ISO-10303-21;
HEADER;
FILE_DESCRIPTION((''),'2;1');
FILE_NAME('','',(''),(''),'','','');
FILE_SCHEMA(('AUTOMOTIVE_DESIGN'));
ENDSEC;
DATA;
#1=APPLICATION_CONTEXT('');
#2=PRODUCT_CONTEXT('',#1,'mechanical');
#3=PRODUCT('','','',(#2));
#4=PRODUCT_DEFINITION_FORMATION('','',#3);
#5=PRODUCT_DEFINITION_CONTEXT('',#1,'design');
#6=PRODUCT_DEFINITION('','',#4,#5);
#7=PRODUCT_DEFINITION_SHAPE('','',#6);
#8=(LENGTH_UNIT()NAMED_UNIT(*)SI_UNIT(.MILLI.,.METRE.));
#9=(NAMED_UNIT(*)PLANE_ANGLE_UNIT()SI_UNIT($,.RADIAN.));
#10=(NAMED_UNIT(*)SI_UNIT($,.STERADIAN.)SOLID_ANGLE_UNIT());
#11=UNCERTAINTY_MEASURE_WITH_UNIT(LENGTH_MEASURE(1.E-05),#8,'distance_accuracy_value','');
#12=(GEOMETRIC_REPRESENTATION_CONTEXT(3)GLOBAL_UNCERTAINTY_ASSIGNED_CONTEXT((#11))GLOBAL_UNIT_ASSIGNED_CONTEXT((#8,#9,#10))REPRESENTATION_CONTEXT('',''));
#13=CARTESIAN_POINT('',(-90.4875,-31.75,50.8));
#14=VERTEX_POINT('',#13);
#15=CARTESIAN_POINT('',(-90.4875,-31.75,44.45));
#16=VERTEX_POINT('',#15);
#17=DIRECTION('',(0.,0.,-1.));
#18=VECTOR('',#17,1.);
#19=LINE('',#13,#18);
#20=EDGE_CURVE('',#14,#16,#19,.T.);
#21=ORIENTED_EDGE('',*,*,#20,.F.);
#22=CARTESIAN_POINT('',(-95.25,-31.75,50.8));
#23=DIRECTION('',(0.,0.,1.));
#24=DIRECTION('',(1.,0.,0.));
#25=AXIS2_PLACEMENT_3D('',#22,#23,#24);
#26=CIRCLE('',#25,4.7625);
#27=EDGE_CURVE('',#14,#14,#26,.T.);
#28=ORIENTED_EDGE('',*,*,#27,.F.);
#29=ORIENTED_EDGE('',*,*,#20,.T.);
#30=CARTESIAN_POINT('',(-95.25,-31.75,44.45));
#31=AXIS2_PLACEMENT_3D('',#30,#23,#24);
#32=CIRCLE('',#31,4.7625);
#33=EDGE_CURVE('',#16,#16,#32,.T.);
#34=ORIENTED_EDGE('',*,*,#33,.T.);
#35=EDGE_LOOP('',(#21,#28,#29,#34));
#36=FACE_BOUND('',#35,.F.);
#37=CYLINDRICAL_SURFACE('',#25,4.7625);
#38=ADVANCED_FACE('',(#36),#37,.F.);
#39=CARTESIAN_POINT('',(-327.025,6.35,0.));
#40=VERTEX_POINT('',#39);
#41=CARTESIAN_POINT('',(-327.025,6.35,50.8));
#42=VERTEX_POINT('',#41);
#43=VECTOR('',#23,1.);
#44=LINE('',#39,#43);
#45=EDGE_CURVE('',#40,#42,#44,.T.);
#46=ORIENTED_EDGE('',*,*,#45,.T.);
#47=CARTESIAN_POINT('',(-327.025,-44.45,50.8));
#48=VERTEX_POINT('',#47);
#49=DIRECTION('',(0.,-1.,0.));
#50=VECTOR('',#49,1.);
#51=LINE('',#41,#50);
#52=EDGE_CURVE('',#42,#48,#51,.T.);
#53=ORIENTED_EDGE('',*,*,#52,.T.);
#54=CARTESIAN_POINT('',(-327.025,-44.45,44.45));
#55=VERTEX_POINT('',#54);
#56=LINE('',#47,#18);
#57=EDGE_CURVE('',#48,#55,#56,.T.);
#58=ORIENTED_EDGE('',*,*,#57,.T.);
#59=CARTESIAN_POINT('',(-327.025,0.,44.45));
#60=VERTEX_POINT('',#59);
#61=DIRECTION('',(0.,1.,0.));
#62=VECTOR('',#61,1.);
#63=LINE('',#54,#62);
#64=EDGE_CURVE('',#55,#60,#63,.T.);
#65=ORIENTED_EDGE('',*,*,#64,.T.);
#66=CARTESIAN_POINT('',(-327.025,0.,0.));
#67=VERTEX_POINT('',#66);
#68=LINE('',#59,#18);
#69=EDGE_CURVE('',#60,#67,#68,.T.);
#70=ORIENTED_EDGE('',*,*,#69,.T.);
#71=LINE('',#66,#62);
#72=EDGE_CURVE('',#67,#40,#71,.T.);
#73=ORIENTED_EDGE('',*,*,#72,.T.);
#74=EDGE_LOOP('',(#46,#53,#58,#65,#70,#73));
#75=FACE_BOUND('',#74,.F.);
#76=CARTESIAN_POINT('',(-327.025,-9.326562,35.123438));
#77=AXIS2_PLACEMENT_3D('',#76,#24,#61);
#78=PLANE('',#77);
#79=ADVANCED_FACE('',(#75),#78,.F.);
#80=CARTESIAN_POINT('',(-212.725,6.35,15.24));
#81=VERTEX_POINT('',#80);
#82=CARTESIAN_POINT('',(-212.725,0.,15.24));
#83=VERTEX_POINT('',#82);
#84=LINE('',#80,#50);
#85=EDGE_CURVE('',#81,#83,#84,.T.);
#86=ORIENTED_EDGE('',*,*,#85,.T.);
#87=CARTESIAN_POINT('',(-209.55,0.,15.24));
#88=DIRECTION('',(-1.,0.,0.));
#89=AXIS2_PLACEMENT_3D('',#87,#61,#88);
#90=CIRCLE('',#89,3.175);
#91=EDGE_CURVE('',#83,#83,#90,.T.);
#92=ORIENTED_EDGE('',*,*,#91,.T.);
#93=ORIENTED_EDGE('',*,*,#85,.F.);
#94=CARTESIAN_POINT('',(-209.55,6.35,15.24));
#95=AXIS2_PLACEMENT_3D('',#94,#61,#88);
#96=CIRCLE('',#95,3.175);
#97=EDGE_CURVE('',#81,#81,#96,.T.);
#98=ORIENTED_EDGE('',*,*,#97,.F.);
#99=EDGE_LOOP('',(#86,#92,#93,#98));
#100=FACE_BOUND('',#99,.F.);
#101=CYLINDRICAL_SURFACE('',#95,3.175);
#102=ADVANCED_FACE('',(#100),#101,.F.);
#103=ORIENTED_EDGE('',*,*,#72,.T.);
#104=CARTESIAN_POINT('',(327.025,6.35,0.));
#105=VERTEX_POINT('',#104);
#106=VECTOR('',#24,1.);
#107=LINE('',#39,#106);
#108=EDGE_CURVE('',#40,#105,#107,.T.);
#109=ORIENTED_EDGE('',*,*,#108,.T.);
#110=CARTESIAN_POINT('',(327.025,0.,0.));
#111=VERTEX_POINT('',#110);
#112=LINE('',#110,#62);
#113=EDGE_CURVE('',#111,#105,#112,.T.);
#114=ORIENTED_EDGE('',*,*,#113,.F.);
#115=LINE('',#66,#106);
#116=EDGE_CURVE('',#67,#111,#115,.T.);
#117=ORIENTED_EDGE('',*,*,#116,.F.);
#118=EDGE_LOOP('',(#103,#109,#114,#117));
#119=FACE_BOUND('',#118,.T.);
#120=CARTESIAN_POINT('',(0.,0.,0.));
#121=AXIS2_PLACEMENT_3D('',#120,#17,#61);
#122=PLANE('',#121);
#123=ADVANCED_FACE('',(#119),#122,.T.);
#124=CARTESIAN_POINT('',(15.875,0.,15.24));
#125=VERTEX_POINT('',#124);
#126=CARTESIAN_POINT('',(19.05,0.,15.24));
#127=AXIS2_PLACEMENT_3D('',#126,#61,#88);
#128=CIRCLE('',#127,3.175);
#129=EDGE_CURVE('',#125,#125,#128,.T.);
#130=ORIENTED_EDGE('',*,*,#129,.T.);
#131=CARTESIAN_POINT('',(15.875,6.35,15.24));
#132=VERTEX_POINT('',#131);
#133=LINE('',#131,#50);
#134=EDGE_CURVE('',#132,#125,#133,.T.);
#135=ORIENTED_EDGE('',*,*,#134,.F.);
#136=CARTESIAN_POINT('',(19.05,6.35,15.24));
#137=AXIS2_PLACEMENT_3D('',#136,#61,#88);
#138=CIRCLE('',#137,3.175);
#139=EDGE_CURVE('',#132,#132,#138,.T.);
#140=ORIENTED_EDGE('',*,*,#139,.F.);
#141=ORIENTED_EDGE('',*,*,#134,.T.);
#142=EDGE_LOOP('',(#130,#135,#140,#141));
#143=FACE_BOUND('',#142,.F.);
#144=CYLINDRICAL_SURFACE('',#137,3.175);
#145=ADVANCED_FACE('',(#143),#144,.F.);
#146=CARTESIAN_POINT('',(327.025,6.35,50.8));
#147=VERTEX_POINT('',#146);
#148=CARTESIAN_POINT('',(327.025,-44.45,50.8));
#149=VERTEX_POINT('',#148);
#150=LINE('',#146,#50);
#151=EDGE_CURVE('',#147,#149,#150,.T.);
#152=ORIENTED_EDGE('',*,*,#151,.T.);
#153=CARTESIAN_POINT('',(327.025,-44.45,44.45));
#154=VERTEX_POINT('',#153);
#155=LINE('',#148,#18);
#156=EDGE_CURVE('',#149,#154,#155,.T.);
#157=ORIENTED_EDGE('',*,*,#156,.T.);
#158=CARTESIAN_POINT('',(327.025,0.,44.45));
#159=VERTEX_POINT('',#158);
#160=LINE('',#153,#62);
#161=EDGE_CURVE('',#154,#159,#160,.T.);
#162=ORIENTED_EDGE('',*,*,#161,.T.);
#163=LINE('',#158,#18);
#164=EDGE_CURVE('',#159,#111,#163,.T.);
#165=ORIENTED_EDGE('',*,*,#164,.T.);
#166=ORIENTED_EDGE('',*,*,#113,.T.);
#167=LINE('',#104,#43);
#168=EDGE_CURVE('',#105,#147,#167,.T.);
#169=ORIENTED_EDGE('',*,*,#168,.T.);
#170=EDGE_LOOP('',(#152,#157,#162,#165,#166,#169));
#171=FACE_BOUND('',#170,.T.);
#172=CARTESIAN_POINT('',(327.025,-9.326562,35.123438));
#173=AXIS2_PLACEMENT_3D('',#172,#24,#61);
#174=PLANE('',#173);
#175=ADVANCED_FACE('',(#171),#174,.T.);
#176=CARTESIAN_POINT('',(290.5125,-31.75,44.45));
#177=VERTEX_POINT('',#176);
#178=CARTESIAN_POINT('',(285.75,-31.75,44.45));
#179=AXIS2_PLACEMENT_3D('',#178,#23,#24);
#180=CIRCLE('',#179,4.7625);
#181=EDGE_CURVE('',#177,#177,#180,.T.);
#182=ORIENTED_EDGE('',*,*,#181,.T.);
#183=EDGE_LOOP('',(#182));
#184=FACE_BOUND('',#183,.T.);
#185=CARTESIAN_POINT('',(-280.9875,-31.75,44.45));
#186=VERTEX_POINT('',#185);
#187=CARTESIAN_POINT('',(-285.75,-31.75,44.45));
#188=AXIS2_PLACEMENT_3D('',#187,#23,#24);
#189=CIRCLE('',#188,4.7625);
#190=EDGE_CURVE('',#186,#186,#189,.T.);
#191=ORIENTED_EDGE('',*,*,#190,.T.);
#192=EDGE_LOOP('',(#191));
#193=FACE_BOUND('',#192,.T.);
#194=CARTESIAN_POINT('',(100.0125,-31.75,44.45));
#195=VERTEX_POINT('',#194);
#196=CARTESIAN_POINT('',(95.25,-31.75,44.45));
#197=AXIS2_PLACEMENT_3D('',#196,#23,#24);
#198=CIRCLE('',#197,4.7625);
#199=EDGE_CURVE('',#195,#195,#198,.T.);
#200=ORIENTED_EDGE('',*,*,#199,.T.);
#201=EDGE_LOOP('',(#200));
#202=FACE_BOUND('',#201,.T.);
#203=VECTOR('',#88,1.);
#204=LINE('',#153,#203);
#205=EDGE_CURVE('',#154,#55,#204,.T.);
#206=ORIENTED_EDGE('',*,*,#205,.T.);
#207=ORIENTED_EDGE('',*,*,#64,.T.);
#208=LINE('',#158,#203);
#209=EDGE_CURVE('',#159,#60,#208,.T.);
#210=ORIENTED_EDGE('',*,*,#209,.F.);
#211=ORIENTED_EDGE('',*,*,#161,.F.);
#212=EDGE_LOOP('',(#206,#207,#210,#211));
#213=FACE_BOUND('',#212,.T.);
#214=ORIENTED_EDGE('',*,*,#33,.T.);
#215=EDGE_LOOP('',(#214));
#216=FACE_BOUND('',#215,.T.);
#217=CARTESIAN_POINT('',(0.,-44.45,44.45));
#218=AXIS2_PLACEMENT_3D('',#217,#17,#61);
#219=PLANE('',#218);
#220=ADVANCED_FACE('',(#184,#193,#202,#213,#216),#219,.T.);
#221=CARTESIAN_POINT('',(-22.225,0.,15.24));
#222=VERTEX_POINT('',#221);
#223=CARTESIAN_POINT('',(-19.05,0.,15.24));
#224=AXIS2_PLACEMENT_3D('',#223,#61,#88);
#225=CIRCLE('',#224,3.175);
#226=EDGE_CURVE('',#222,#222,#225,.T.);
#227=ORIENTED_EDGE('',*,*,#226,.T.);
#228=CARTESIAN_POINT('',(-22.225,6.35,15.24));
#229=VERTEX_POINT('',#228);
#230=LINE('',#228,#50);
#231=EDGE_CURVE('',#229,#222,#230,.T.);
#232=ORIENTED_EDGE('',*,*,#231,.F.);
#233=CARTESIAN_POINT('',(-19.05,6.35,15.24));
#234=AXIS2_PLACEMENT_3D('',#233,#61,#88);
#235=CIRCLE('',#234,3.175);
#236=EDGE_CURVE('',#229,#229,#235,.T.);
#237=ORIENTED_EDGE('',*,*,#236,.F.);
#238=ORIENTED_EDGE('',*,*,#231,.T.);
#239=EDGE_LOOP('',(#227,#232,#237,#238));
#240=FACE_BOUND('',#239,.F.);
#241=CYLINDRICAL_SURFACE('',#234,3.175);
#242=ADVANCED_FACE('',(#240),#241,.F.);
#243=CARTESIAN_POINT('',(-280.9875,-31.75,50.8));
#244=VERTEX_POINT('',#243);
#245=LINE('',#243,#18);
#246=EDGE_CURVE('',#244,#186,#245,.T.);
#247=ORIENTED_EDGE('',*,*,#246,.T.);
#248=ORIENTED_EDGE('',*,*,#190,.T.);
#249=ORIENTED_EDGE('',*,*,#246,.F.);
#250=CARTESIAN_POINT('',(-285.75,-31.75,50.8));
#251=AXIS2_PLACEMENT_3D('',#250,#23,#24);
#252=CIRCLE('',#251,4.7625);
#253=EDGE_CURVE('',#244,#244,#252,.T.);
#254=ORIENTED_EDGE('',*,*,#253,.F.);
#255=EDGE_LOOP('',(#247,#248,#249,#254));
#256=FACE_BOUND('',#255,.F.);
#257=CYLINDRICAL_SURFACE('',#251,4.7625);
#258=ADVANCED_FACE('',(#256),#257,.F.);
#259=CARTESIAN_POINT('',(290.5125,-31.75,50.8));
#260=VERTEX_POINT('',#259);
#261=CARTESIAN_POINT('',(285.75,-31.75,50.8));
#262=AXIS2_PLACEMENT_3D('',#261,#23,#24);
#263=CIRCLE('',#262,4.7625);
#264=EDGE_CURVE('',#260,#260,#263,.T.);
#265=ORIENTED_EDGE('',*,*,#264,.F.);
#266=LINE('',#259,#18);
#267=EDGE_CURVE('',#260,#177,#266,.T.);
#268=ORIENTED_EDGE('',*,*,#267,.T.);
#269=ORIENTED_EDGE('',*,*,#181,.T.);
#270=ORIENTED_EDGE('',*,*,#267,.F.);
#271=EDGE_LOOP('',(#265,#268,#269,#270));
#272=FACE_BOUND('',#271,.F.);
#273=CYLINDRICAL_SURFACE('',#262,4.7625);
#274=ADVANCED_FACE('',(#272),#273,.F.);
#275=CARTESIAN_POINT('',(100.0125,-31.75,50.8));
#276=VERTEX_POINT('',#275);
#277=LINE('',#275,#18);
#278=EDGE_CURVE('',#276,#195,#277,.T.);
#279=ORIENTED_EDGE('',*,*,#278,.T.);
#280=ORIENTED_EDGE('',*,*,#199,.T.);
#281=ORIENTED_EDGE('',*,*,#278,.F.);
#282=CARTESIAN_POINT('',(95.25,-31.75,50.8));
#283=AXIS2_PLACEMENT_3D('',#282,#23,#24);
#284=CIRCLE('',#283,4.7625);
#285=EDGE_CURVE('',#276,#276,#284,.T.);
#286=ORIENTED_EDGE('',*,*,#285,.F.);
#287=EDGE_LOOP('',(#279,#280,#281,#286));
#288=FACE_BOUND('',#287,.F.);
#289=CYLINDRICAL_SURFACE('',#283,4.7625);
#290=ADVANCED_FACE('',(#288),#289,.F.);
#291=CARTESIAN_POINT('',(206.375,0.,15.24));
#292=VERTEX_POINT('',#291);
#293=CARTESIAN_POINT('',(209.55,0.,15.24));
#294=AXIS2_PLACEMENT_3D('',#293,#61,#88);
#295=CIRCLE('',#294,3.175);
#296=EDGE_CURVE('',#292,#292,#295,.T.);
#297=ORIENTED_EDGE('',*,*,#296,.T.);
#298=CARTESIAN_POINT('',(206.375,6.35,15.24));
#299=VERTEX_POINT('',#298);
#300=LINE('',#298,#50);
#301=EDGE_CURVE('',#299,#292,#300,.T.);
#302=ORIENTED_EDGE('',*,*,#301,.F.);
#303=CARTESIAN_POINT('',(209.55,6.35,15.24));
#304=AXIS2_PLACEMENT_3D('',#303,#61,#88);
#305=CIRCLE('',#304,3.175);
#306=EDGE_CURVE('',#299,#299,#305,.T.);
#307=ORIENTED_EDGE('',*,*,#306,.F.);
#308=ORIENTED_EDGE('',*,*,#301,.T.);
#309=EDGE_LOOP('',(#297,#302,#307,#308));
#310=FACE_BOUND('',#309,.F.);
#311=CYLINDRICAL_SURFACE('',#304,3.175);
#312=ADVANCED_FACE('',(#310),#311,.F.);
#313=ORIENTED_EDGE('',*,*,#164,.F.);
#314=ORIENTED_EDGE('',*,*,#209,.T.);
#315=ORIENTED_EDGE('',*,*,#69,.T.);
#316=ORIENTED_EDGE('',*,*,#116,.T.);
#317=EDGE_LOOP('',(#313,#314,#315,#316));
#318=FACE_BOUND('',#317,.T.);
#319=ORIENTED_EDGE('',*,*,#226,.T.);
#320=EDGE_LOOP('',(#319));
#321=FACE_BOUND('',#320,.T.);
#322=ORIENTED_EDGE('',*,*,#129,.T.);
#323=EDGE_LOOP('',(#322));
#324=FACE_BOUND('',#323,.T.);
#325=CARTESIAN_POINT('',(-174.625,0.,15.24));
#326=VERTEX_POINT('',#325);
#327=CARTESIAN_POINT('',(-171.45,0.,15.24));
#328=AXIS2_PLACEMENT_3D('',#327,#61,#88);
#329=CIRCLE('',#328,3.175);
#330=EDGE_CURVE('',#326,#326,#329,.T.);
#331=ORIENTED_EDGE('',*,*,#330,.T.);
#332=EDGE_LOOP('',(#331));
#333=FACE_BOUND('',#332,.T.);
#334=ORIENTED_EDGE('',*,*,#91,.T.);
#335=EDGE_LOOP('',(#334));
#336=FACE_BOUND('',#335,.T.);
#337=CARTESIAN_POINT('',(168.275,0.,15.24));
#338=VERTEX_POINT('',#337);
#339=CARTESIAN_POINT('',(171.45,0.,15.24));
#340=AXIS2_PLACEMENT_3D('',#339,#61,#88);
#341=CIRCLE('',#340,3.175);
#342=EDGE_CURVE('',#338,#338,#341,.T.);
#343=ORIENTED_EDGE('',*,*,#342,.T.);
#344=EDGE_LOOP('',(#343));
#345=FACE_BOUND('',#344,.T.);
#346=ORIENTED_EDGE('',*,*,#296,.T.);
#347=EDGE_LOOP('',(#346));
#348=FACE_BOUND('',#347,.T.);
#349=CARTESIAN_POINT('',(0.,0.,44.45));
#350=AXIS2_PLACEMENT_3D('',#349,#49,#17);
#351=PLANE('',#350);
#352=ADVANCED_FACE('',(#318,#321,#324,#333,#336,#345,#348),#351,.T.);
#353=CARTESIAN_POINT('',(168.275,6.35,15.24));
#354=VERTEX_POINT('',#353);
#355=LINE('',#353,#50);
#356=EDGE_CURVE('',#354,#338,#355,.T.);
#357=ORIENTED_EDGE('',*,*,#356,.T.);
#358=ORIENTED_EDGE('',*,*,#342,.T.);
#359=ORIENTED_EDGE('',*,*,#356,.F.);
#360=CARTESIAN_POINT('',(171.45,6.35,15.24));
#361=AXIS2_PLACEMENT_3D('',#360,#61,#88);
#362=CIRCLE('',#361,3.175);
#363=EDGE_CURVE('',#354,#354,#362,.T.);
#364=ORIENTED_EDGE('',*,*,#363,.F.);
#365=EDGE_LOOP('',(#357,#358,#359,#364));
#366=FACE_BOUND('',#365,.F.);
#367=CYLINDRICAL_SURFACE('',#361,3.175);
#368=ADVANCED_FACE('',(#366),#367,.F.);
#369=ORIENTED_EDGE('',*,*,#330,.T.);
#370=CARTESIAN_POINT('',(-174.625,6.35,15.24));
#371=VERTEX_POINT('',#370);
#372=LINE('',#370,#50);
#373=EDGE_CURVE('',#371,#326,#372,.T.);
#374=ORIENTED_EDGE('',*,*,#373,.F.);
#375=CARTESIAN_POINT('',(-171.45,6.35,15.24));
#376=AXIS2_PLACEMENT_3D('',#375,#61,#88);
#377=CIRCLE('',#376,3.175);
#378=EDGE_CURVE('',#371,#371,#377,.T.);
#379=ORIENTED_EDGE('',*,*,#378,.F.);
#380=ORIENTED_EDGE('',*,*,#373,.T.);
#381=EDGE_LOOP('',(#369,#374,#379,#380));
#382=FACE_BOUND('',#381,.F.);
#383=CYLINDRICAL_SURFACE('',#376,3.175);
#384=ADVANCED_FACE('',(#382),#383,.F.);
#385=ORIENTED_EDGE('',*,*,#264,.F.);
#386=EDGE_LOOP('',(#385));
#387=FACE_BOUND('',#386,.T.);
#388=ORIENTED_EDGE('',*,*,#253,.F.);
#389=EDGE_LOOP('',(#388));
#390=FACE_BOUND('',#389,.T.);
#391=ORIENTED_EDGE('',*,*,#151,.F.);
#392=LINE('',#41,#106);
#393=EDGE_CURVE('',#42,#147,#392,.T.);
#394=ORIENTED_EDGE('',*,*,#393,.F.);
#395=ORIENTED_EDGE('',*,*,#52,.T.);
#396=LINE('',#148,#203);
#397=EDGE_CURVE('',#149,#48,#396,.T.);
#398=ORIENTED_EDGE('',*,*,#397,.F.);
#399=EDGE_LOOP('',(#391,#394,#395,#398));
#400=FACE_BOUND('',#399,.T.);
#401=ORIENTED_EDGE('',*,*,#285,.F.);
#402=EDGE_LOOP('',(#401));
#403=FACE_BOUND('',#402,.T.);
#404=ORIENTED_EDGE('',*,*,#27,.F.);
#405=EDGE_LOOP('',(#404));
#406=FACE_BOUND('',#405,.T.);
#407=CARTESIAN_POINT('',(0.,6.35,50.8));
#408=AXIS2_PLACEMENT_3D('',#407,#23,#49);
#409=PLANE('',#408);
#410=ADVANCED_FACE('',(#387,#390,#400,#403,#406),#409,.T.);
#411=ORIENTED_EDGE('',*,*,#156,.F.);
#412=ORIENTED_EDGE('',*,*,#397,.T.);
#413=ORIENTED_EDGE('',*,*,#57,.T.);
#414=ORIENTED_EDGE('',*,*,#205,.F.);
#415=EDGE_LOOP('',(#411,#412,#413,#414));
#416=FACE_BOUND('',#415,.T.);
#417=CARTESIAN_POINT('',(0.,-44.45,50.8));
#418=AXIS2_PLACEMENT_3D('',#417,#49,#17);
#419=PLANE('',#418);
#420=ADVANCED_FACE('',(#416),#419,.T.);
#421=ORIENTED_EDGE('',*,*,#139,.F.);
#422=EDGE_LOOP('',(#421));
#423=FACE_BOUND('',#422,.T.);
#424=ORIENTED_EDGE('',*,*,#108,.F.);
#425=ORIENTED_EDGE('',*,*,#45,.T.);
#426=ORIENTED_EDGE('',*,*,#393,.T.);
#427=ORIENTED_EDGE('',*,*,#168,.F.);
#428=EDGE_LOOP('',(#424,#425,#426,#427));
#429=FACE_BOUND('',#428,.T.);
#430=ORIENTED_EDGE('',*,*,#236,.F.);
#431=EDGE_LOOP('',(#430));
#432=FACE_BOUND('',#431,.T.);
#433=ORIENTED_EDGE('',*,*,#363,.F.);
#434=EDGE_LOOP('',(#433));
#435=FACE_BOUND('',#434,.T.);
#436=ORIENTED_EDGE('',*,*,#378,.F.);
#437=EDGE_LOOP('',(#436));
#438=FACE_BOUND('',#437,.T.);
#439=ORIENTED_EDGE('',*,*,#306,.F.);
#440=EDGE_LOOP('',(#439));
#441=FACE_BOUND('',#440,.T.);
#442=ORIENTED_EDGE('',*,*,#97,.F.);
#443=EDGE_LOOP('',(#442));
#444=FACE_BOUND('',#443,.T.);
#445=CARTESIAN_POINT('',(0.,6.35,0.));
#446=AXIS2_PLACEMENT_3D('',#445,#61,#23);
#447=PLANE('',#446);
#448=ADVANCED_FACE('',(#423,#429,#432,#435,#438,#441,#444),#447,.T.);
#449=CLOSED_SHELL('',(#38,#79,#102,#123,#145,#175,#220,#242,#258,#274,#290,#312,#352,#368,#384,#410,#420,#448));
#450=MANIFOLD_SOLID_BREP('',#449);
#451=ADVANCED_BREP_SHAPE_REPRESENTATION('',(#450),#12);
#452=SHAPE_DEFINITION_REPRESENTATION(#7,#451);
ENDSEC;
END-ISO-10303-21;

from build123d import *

# Parameters (mm, degrees)
F1_DEPTH      = 327.025
F2_R          = 4.7625
F3_DEPTH      = 50.801
F4_R          = 3.175
F5_DEPTH      = 50.801
F5_DEPTH_BACK = 697


# Not quite as in the source:
# - an extrude ends at something that could not be found from the text; its depth is read off the source's solid


with BuildPart() as f1:
    # F0 (on Right) → F1 (new body, symmetric)
    with BuildSketch(Plane.YZ):
        Polygon((0, 44.45), (0, 0), (6.35, 0), (6.35, 50.8), (-44.45, 50.8), (-44.45, 44.45), align=None)
    extrude(amount=F1_DEPTH, both=True)

    # F2 (on face) → F3 (cut, through all)
    with BuildSketch(Plane.XY.offset(50.8)):
        with Locations((-285.75, -31.75)):
            Circle(F2_R)
        with Locations((-95.25, -31.75)):
            Circle(F2_R)
        with Locations((95.25, -31.75)):
            Circle(F2_R)
        with Locations((285.75, -31.75)):
            Circle(F2_R)
    extrude(amount=-F3_DEPTH, mode=Mode.SUBTRACT)

    # F4 (on face) → F5 (cut, two sides)
    with BuildSketch(Plane(origin=(0, 6.35, 0), x_dir=(-1, 0, 0), z_dir=(0, 1, 0))) as f5_sk:
        with Locations((209.55, 15.24)):
            Circle(F4_R)
        with Locations((171.45, 15.24)):
            Circle(F4_R)
        with Locations((19.05, 15.24)):
            Circle(F4_R)
        with Locations((-19.05, 15.24)):
            Circle(F4_R)
        with Locations((-171.45, 15.24)):
            Circle(F4_R)
        with Locations((-209.55, 15.24)):
            Circle(F4_R)
    extrude(amount=-F5_DEPTH, mode=Mode.SUBTRACT)
    extrude(f5_sk.sketch, amount=F5_DEPTH_BACK, mode=Mode.SUBTRACT)


solid = f1.part
